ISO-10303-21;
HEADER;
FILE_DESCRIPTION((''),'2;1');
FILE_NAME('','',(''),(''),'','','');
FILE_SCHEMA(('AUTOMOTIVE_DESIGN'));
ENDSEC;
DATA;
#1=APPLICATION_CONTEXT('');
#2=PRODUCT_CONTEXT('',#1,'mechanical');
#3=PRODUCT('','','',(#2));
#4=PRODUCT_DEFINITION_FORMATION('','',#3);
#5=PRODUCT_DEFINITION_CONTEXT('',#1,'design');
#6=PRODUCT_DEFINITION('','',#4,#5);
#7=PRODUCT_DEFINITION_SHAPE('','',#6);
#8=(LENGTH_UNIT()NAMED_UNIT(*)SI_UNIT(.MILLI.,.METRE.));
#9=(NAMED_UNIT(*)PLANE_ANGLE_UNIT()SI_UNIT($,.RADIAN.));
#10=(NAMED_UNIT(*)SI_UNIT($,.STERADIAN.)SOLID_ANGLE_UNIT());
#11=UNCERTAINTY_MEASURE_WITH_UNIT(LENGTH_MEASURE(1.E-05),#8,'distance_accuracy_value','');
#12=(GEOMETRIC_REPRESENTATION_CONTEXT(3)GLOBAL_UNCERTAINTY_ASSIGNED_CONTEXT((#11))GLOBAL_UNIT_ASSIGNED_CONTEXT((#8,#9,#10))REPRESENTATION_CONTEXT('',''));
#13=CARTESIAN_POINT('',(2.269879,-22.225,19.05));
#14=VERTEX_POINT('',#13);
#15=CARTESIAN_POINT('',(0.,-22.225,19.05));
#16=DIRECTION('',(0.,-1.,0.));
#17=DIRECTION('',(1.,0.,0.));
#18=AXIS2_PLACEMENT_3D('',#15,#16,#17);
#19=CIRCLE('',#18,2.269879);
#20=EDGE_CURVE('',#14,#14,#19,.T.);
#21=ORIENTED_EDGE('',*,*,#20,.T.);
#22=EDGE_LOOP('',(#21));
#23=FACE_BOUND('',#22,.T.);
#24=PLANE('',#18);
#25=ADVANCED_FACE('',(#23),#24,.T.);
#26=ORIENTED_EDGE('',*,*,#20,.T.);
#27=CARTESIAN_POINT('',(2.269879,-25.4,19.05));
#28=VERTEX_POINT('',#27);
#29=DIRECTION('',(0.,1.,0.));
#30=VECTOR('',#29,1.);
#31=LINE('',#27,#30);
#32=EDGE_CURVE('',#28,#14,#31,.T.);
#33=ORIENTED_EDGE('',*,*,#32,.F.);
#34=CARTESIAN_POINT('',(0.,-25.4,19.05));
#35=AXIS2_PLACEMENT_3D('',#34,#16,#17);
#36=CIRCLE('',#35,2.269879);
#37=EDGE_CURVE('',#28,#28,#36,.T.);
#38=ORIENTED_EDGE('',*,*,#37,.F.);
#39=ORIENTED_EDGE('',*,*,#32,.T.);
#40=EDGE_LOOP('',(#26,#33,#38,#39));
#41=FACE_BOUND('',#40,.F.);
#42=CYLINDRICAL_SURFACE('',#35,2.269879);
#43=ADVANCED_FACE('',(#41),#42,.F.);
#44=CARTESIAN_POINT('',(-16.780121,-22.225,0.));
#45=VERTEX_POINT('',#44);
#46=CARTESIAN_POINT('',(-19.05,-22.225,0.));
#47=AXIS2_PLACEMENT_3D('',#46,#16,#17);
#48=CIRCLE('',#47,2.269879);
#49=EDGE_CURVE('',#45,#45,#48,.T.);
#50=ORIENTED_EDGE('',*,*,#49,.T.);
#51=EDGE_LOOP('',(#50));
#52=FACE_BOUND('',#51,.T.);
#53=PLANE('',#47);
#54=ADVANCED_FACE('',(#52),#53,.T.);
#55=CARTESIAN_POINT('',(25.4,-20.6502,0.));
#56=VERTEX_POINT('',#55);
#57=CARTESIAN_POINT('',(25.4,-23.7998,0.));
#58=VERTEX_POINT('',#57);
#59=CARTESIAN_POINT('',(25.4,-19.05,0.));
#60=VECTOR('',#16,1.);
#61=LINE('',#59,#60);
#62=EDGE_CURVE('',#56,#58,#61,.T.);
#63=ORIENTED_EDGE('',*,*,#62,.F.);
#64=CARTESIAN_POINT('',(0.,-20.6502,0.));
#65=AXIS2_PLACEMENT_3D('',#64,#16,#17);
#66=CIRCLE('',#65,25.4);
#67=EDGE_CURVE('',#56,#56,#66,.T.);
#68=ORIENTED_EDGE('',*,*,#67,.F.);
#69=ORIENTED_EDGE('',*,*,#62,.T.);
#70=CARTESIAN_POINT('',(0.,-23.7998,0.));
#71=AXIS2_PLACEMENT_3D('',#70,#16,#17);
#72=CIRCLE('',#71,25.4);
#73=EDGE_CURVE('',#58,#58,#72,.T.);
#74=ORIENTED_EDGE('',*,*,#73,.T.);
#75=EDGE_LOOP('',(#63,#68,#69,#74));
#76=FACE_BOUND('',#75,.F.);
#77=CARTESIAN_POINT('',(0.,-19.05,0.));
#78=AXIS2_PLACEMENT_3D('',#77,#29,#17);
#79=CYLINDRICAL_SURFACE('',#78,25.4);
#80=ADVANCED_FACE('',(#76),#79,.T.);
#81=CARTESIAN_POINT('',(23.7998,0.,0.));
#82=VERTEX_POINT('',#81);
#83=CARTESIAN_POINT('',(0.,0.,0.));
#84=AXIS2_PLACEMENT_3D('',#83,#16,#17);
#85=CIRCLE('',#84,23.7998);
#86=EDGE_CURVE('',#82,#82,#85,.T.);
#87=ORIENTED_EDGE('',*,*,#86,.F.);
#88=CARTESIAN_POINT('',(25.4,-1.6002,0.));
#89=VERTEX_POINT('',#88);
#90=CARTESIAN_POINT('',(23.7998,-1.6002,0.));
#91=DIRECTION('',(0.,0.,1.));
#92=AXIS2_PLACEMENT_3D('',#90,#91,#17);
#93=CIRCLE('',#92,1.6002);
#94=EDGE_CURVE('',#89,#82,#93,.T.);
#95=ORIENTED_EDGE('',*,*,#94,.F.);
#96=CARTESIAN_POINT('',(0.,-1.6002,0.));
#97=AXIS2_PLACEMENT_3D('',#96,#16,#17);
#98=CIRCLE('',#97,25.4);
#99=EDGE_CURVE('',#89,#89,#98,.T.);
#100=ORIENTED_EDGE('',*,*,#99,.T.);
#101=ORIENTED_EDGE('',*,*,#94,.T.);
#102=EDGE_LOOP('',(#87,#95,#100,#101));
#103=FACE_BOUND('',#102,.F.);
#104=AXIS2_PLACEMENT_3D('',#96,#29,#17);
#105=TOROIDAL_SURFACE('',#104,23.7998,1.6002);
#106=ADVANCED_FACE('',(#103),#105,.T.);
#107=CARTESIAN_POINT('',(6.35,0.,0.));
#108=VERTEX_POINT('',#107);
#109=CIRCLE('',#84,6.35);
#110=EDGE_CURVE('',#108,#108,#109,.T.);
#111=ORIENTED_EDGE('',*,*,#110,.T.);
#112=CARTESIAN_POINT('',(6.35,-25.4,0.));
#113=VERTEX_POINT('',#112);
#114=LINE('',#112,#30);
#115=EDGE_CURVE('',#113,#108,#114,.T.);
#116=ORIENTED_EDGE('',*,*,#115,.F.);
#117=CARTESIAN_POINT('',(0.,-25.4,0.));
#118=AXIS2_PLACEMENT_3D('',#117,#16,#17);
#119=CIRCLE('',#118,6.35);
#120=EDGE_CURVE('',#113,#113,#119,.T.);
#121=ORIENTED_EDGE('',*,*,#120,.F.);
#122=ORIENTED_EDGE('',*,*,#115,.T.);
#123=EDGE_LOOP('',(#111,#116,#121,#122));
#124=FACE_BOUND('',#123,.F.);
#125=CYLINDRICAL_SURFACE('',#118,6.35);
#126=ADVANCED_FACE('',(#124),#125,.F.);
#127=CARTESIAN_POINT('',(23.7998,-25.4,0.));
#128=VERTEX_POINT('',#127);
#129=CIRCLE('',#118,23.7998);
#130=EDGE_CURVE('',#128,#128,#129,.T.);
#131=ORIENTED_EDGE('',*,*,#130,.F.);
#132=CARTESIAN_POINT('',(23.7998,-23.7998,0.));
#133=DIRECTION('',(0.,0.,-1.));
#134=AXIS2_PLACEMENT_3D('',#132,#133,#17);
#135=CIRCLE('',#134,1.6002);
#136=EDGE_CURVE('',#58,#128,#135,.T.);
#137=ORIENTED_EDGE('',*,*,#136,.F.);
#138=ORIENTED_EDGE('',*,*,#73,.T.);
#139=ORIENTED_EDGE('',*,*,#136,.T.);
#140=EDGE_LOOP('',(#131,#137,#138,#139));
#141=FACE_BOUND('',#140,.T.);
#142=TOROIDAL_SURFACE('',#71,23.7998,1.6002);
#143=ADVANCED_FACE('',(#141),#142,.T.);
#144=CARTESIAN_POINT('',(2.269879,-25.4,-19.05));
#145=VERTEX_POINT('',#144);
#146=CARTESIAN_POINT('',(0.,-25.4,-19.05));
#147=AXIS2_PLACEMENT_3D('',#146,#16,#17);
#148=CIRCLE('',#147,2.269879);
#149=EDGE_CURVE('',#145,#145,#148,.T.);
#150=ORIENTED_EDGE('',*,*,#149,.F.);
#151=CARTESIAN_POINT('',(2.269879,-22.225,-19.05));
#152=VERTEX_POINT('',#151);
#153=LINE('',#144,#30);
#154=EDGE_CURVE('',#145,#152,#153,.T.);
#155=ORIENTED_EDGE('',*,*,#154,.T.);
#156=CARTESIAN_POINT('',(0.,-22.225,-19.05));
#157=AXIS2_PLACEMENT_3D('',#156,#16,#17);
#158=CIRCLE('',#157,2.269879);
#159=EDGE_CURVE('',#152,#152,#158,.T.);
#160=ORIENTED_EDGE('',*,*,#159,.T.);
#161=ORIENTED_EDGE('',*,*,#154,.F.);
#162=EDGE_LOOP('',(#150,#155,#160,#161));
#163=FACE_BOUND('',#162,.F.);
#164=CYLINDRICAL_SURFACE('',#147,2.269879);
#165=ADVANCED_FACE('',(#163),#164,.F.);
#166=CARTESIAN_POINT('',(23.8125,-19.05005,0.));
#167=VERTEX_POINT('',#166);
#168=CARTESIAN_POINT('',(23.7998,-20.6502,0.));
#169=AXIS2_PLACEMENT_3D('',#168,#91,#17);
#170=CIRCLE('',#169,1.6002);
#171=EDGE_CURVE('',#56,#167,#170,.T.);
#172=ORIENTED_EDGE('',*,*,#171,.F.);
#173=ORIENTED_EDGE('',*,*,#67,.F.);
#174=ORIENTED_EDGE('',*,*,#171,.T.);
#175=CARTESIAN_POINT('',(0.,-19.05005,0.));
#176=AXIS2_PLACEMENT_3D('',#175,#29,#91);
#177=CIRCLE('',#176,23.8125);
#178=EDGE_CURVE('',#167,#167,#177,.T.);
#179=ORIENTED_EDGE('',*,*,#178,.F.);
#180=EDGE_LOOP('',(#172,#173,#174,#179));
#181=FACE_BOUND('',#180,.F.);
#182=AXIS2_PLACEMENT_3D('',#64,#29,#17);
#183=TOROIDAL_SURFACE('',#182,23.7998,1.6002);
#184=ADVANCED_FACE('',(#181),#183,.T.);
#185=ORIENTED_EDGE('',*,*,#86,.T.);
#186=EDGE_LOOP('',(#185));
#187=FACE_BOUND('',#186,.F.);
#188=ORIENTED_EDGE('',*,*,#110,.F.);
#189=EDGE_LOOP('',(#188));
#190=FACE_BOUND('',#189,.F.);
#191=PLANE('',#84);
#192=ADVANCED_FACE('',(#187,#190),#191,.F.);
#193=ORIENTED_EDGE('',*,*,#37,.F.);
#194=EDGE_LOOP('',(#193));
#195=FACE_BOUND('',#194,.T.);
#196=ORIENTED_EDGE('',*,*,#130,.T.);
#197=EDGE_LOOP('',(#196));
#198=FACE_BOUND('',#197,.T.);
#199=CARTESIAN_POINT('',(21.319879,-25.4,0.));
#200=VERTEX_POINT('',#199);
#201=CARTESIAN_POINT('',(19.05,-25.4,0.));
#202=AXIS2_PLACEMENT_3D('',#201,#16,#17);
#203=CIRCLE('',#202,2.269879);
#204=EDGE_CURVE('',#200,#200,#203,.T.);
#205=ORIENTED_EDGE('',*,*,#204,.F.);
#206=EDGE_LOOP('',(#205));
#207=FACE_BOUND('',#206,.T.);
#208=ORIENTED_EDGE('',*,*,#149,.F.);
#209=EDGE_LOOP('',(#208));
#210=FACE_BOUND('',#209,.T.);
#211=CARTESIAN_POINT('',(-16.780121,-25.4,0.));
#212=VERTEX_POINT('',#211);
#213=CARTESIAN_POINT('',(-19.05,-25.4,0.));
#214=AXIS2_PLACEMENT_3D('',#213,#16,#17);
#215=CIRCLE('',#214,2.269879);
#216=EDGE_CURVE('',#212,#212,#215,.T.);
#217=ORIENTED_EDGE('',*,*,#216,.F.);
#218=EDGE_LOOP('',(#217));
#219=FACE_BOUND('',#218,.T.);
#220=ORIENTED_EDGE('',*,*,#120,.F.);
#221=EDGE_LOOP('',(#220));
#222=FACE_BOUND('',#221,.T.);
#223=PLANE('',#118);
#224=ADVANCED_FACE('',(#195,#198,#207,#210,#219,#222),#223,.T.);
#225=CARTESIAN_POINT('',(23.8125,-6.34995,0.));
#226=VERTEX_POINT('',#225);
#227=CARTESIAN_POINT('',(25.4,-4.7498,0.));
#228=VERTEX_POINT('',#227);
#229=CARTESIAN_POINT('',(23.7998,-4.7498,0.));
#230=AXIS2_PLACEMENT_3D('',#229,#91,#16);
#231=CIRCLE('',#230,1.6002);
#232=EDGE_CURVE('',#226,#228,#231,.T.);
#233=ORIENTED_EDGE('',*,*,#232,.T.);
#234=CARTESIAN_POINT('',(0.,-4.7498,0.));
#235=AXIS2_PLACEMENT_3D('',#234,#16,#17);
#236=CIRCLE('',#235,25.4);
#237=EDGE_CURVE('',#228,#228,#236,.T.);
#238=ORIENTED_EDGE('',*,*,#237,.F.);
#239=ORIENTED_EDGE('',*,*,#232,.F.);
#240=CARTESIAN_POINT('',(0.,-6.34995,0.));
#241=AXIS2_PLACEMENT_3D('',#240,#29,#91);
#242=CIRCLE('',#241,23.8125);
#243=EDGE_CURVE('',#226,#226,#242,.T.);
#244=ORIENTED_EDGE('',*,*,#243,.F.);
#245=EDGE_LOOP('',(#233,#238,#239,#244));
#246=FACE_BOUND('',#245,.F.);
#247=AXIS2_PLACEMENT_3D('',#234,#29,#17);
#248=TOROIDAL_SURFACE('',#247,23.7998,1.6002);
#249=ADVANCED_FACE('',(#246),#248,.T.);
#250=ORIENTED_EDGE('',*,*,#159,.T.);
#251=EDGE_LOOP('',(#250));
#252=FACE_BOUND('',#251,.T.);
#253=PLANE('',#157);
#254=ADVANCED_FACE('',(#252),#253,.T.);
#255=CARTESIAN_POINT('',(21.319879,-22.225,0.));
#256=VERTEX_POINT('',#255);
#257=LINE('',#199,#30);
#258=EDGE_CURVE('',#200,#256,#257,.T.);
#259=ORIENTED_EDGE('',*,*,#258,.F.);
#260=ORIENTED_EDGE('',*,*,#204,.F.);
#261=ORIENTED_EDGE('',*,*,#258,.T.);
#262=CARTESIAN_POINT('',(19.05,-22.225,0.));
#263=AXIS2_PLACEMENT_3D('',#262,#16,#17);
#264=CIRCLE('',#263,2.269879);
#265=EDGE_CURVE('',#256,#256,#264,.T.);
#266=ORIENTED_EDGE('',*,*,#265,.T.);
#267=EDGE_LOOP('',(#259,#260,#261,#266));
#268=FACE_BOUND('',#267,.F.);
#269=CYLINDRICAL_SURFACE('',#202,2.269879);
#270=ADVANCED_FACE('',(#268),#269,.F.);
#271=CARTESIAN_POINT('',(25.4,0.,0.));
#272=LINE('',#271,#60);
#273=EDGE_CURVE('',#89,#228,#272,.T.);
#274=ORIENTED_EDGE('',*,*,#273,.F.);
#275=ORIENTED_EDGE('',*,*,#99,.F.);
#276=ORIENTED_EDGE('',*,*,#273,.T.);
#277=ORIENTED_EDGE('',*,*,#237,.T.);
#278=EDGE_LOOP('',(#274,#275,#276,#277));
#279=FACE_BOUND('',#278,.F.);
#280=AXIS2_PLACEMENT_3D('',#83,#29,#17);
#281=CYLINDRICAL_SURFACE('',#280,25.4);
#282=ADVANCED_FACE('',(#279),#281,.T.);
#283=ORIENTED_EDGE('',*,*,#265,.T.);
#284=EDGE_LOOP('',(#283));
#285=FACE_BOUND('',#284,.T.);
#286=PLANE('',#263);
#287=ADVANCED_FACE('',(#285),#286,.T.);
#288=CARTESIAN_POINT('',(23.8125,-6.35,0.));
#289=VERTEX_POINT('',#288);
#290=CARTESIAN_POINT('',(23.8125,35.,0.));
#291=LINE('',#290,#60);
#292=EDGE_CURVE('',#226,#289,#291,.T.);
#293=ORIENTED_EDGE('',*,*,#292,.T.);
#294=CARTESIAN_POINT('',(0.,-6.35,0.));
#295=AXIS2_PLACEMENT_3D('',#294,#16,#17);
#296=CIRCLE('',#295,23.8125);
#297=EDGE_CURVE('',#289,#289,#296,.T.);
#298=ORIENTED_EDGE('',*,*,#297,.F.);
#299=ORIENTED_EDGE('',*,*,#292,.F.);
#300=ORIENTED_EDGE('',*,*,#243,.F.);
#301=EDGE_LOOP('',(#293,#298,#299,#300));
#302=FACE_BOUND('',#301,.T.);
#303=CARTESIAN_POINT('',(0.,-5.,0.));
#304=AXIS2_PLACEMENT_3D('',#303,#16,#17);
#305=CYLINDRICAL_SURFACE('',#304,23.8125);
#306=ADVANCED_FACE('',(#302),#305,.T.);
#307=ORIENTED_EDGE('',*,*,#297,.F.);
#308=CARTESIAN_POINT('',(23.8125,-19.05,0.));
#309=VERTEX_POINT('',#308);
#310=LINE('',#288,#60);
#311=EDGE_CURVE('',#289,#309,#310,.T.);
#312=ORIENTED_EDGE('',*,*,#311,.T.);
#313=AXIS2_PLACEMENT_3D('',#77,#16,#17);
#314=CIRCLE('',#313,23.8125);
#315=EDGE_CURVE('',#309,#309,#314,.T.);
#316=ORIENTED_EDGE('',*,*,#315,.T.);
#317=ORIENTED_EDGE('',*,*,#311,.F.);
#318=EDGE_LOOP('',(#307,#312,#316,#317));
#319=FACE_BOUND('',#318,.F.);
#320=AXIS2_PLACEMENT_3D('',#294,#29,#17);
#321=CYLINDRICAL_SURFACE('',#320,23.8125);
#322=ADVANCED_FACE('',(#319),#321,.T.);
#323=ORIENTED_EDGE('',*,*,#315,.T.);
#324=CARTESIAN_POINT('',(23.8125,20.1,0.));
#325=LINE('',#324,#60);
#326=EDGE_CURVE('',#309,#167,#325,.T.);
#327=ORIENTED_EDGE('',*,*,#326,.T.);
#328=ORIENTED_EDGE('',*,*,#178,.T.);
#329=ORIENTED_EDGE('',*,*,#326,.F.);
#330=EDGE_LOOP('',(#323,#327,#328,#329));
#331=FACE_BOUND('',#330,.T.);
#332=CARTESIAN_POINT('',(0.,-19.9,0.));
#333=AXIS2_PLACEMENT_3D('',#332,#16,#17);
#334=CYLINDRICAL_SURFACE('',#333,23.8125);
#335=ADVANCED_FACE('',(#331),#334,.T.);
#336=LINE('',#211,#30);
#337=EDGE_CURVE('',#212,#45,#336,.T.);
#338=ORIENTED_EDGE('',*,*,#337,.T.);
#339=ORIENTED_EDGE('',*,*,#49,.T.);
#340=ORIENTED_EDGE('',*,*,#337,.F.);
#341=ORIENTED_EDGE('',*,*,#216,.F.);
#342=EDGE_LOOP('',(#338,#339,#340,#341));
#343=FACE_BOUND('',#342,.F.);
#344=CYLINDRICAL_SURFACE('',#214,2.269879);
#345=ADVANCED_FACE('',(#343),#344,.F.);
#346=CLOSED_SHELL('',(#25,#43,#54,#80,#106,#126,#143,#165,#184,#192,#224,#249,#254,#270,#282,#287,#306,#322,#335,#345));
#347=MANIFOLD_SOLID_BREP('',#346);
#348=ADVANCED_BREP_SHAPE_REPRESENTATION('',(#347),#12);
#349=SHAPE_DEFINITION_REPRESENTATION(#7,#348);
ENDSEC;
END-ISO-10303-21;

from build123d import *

# Parameters (mm, degrees)
F0_R         = 25.4
F1_DEPTH     = 6.35
F2_R         = 23.8125
F3_DEPTH     = 12.7
F4_R         = 25.4
F5_DEPTH     = 6.35
F6_S7_R      = 23.8125
F6_T8_DEPTH  = 40
F6_S13_R     = 23.8125
F6_T14_DEPTH = 40
F7_R         = 2.2698789725
F8_DEPTH     = 3.175
F9_R         = 6.35
F10_DEPTH    = 25.401


# Not quite as in the source:
# - a fillet or chamfer that OpenCascade refuses, or shapes differently, is made with other operations: its cross-section is extruded or revolved along the edge and cut away or added


with BuildPart() as f1:
    # F0 (on Front) → F1 (new body)
    with BuildSketch(Plane.XZ):
        Circle(F0_R)
    extrude(amount=F1_DEPTH)

    # F2 (on face) → F3 (join)
    with BuildSketch(Plane.XZ.offset(6.35)):
        Circle(F2_R)
    extrude(amount=F3_DEPTH)

    # F4 (on face) → F5 (join)
    with BuildSketch(Plane.XZ.offset(19.05)):
        Circle(F4_R)
    extrude(amount=F5_DEPTH)

    # F6: fillet of radius 1.6002 on 4 edges, made by hand

    # F6_s1 → F6_t2 (revolve, cut)
    with BuildSketch(Plane.XY):
        with BuildLine():
            ThreePointArc((25.4, -23.7998), (24.9313122713, -24.9313122713), (23.7998, -25.4))
            Line((23.7998, -25.4), (25.4, -25.4))
            Line((25.4, -25.4), (25.4, -23.7998))
        make_face()
    revolve(axis=Axis((0, -25.4, 0), (0, -1, 0)), mode=Mode.SUBTRACT)


with BuildPart() as f6_tool4:
    # F6_s5 → F6_t6 (revolve)
    with BuildSketch(Plane.XY):
        with BuildLine():
            ThreePointArc((25.4, -20.6502), (24.9313122713, -19.5186877287), (23.7998, -19.05))
            Line((23.7998, -19.05), (25.4, -19.05))
            Line((25.4, -19.05), (25.4, -20.6502))
        make_face()
    revolve(axis=Axis((0, -19.05, 0), (0, -1, 0)))

    # F6_s7 → F6_t8 (cut, symmetric)
    with BuildSketch(Plane.XZ.offset(19.9)):
        Circle(F6_S7_R)
    extrude(amount=F6_T8_DEPTH, both=True, mode=Mode.SUBTRACT)


with BuildPart() as f1_1:
    add(f1.part)

    # F6_t3: cut F6_tool4
    add(f6_tool4.part, mode=Mode.SUBTRACT)


with BuildPart() as f6_tool10:
    # F6_s11 → F6_t12 (revolve)
    with BuildSketch(Plane.XY):
        with BuildLine():
            ThreePointArc((23.7998, -6.35), (24.9313122713, -5.8813122713), (25.4, -4.7498))
            Line((25.4, -4.7498), (25.4, -6.35))
            Line((25.4, -6.35), (23.7998, -6.35))
        make_face()
    revolve(axis=Axis((0, -6.35, 0), (0, -1, 0)))

    # F6_s13 → F6_t14 (cut, symmetric)
    with BuildSketch(Plane.XZ.offset(5)):
        Circle(F6_S13_R)
    extrude(amount=F6_T14_DEPTH, both=True, mode=Mode.SUBTRACT)


with BuildPart() as f1_2:
    add(f1_1.part)

    # F6_t9: cut F6_tool10
    add(f6_tool10.part, mode=Mode.SUBTRACT)

    # F6_s15 → F6_t16 (revolve, cut)
    with BuildSketch(Plane.XY):
        with BuildLine():
            ThreePointArc((25.4, -1.6002), (24.9313122713, -0.4686877287), (23.7998, 0))
            Line((23.7998, 0), (25.4, 0))
            Line((25.4, 0), (25.4, -1.6002))
        make_face()
    revolve(axis=Axis((0, 0, 0), (0, -1, 0)), mode=Mode.SUBTRACT)

    # F7 (on face) → F8 (cut)
    with BuildSketch(Plane.XZ.offset(25.4)):
        with Locations((-19.05, 0)):
            Circle(F7_R)
        with Locations((0, -19.05)):
            Circle(F7_R)
        with Locations((19.05, 0)):
            Circle(F7_R)
        with Locations((0, 19.05)):
            Circle(F7_R)
    extrude(amount=-F8_DEPTH, mode=Mode.SUBTRACT)

    # F9 (on face) → F10 (cut, through all)
    with BuildSketch(Plane.XZ.offset(25.4)):
        Circle(F9_R)
    extrude(amount=-F10_DEPTH, mode=Mode.SUBTRACT)


solid = f1_2.part
